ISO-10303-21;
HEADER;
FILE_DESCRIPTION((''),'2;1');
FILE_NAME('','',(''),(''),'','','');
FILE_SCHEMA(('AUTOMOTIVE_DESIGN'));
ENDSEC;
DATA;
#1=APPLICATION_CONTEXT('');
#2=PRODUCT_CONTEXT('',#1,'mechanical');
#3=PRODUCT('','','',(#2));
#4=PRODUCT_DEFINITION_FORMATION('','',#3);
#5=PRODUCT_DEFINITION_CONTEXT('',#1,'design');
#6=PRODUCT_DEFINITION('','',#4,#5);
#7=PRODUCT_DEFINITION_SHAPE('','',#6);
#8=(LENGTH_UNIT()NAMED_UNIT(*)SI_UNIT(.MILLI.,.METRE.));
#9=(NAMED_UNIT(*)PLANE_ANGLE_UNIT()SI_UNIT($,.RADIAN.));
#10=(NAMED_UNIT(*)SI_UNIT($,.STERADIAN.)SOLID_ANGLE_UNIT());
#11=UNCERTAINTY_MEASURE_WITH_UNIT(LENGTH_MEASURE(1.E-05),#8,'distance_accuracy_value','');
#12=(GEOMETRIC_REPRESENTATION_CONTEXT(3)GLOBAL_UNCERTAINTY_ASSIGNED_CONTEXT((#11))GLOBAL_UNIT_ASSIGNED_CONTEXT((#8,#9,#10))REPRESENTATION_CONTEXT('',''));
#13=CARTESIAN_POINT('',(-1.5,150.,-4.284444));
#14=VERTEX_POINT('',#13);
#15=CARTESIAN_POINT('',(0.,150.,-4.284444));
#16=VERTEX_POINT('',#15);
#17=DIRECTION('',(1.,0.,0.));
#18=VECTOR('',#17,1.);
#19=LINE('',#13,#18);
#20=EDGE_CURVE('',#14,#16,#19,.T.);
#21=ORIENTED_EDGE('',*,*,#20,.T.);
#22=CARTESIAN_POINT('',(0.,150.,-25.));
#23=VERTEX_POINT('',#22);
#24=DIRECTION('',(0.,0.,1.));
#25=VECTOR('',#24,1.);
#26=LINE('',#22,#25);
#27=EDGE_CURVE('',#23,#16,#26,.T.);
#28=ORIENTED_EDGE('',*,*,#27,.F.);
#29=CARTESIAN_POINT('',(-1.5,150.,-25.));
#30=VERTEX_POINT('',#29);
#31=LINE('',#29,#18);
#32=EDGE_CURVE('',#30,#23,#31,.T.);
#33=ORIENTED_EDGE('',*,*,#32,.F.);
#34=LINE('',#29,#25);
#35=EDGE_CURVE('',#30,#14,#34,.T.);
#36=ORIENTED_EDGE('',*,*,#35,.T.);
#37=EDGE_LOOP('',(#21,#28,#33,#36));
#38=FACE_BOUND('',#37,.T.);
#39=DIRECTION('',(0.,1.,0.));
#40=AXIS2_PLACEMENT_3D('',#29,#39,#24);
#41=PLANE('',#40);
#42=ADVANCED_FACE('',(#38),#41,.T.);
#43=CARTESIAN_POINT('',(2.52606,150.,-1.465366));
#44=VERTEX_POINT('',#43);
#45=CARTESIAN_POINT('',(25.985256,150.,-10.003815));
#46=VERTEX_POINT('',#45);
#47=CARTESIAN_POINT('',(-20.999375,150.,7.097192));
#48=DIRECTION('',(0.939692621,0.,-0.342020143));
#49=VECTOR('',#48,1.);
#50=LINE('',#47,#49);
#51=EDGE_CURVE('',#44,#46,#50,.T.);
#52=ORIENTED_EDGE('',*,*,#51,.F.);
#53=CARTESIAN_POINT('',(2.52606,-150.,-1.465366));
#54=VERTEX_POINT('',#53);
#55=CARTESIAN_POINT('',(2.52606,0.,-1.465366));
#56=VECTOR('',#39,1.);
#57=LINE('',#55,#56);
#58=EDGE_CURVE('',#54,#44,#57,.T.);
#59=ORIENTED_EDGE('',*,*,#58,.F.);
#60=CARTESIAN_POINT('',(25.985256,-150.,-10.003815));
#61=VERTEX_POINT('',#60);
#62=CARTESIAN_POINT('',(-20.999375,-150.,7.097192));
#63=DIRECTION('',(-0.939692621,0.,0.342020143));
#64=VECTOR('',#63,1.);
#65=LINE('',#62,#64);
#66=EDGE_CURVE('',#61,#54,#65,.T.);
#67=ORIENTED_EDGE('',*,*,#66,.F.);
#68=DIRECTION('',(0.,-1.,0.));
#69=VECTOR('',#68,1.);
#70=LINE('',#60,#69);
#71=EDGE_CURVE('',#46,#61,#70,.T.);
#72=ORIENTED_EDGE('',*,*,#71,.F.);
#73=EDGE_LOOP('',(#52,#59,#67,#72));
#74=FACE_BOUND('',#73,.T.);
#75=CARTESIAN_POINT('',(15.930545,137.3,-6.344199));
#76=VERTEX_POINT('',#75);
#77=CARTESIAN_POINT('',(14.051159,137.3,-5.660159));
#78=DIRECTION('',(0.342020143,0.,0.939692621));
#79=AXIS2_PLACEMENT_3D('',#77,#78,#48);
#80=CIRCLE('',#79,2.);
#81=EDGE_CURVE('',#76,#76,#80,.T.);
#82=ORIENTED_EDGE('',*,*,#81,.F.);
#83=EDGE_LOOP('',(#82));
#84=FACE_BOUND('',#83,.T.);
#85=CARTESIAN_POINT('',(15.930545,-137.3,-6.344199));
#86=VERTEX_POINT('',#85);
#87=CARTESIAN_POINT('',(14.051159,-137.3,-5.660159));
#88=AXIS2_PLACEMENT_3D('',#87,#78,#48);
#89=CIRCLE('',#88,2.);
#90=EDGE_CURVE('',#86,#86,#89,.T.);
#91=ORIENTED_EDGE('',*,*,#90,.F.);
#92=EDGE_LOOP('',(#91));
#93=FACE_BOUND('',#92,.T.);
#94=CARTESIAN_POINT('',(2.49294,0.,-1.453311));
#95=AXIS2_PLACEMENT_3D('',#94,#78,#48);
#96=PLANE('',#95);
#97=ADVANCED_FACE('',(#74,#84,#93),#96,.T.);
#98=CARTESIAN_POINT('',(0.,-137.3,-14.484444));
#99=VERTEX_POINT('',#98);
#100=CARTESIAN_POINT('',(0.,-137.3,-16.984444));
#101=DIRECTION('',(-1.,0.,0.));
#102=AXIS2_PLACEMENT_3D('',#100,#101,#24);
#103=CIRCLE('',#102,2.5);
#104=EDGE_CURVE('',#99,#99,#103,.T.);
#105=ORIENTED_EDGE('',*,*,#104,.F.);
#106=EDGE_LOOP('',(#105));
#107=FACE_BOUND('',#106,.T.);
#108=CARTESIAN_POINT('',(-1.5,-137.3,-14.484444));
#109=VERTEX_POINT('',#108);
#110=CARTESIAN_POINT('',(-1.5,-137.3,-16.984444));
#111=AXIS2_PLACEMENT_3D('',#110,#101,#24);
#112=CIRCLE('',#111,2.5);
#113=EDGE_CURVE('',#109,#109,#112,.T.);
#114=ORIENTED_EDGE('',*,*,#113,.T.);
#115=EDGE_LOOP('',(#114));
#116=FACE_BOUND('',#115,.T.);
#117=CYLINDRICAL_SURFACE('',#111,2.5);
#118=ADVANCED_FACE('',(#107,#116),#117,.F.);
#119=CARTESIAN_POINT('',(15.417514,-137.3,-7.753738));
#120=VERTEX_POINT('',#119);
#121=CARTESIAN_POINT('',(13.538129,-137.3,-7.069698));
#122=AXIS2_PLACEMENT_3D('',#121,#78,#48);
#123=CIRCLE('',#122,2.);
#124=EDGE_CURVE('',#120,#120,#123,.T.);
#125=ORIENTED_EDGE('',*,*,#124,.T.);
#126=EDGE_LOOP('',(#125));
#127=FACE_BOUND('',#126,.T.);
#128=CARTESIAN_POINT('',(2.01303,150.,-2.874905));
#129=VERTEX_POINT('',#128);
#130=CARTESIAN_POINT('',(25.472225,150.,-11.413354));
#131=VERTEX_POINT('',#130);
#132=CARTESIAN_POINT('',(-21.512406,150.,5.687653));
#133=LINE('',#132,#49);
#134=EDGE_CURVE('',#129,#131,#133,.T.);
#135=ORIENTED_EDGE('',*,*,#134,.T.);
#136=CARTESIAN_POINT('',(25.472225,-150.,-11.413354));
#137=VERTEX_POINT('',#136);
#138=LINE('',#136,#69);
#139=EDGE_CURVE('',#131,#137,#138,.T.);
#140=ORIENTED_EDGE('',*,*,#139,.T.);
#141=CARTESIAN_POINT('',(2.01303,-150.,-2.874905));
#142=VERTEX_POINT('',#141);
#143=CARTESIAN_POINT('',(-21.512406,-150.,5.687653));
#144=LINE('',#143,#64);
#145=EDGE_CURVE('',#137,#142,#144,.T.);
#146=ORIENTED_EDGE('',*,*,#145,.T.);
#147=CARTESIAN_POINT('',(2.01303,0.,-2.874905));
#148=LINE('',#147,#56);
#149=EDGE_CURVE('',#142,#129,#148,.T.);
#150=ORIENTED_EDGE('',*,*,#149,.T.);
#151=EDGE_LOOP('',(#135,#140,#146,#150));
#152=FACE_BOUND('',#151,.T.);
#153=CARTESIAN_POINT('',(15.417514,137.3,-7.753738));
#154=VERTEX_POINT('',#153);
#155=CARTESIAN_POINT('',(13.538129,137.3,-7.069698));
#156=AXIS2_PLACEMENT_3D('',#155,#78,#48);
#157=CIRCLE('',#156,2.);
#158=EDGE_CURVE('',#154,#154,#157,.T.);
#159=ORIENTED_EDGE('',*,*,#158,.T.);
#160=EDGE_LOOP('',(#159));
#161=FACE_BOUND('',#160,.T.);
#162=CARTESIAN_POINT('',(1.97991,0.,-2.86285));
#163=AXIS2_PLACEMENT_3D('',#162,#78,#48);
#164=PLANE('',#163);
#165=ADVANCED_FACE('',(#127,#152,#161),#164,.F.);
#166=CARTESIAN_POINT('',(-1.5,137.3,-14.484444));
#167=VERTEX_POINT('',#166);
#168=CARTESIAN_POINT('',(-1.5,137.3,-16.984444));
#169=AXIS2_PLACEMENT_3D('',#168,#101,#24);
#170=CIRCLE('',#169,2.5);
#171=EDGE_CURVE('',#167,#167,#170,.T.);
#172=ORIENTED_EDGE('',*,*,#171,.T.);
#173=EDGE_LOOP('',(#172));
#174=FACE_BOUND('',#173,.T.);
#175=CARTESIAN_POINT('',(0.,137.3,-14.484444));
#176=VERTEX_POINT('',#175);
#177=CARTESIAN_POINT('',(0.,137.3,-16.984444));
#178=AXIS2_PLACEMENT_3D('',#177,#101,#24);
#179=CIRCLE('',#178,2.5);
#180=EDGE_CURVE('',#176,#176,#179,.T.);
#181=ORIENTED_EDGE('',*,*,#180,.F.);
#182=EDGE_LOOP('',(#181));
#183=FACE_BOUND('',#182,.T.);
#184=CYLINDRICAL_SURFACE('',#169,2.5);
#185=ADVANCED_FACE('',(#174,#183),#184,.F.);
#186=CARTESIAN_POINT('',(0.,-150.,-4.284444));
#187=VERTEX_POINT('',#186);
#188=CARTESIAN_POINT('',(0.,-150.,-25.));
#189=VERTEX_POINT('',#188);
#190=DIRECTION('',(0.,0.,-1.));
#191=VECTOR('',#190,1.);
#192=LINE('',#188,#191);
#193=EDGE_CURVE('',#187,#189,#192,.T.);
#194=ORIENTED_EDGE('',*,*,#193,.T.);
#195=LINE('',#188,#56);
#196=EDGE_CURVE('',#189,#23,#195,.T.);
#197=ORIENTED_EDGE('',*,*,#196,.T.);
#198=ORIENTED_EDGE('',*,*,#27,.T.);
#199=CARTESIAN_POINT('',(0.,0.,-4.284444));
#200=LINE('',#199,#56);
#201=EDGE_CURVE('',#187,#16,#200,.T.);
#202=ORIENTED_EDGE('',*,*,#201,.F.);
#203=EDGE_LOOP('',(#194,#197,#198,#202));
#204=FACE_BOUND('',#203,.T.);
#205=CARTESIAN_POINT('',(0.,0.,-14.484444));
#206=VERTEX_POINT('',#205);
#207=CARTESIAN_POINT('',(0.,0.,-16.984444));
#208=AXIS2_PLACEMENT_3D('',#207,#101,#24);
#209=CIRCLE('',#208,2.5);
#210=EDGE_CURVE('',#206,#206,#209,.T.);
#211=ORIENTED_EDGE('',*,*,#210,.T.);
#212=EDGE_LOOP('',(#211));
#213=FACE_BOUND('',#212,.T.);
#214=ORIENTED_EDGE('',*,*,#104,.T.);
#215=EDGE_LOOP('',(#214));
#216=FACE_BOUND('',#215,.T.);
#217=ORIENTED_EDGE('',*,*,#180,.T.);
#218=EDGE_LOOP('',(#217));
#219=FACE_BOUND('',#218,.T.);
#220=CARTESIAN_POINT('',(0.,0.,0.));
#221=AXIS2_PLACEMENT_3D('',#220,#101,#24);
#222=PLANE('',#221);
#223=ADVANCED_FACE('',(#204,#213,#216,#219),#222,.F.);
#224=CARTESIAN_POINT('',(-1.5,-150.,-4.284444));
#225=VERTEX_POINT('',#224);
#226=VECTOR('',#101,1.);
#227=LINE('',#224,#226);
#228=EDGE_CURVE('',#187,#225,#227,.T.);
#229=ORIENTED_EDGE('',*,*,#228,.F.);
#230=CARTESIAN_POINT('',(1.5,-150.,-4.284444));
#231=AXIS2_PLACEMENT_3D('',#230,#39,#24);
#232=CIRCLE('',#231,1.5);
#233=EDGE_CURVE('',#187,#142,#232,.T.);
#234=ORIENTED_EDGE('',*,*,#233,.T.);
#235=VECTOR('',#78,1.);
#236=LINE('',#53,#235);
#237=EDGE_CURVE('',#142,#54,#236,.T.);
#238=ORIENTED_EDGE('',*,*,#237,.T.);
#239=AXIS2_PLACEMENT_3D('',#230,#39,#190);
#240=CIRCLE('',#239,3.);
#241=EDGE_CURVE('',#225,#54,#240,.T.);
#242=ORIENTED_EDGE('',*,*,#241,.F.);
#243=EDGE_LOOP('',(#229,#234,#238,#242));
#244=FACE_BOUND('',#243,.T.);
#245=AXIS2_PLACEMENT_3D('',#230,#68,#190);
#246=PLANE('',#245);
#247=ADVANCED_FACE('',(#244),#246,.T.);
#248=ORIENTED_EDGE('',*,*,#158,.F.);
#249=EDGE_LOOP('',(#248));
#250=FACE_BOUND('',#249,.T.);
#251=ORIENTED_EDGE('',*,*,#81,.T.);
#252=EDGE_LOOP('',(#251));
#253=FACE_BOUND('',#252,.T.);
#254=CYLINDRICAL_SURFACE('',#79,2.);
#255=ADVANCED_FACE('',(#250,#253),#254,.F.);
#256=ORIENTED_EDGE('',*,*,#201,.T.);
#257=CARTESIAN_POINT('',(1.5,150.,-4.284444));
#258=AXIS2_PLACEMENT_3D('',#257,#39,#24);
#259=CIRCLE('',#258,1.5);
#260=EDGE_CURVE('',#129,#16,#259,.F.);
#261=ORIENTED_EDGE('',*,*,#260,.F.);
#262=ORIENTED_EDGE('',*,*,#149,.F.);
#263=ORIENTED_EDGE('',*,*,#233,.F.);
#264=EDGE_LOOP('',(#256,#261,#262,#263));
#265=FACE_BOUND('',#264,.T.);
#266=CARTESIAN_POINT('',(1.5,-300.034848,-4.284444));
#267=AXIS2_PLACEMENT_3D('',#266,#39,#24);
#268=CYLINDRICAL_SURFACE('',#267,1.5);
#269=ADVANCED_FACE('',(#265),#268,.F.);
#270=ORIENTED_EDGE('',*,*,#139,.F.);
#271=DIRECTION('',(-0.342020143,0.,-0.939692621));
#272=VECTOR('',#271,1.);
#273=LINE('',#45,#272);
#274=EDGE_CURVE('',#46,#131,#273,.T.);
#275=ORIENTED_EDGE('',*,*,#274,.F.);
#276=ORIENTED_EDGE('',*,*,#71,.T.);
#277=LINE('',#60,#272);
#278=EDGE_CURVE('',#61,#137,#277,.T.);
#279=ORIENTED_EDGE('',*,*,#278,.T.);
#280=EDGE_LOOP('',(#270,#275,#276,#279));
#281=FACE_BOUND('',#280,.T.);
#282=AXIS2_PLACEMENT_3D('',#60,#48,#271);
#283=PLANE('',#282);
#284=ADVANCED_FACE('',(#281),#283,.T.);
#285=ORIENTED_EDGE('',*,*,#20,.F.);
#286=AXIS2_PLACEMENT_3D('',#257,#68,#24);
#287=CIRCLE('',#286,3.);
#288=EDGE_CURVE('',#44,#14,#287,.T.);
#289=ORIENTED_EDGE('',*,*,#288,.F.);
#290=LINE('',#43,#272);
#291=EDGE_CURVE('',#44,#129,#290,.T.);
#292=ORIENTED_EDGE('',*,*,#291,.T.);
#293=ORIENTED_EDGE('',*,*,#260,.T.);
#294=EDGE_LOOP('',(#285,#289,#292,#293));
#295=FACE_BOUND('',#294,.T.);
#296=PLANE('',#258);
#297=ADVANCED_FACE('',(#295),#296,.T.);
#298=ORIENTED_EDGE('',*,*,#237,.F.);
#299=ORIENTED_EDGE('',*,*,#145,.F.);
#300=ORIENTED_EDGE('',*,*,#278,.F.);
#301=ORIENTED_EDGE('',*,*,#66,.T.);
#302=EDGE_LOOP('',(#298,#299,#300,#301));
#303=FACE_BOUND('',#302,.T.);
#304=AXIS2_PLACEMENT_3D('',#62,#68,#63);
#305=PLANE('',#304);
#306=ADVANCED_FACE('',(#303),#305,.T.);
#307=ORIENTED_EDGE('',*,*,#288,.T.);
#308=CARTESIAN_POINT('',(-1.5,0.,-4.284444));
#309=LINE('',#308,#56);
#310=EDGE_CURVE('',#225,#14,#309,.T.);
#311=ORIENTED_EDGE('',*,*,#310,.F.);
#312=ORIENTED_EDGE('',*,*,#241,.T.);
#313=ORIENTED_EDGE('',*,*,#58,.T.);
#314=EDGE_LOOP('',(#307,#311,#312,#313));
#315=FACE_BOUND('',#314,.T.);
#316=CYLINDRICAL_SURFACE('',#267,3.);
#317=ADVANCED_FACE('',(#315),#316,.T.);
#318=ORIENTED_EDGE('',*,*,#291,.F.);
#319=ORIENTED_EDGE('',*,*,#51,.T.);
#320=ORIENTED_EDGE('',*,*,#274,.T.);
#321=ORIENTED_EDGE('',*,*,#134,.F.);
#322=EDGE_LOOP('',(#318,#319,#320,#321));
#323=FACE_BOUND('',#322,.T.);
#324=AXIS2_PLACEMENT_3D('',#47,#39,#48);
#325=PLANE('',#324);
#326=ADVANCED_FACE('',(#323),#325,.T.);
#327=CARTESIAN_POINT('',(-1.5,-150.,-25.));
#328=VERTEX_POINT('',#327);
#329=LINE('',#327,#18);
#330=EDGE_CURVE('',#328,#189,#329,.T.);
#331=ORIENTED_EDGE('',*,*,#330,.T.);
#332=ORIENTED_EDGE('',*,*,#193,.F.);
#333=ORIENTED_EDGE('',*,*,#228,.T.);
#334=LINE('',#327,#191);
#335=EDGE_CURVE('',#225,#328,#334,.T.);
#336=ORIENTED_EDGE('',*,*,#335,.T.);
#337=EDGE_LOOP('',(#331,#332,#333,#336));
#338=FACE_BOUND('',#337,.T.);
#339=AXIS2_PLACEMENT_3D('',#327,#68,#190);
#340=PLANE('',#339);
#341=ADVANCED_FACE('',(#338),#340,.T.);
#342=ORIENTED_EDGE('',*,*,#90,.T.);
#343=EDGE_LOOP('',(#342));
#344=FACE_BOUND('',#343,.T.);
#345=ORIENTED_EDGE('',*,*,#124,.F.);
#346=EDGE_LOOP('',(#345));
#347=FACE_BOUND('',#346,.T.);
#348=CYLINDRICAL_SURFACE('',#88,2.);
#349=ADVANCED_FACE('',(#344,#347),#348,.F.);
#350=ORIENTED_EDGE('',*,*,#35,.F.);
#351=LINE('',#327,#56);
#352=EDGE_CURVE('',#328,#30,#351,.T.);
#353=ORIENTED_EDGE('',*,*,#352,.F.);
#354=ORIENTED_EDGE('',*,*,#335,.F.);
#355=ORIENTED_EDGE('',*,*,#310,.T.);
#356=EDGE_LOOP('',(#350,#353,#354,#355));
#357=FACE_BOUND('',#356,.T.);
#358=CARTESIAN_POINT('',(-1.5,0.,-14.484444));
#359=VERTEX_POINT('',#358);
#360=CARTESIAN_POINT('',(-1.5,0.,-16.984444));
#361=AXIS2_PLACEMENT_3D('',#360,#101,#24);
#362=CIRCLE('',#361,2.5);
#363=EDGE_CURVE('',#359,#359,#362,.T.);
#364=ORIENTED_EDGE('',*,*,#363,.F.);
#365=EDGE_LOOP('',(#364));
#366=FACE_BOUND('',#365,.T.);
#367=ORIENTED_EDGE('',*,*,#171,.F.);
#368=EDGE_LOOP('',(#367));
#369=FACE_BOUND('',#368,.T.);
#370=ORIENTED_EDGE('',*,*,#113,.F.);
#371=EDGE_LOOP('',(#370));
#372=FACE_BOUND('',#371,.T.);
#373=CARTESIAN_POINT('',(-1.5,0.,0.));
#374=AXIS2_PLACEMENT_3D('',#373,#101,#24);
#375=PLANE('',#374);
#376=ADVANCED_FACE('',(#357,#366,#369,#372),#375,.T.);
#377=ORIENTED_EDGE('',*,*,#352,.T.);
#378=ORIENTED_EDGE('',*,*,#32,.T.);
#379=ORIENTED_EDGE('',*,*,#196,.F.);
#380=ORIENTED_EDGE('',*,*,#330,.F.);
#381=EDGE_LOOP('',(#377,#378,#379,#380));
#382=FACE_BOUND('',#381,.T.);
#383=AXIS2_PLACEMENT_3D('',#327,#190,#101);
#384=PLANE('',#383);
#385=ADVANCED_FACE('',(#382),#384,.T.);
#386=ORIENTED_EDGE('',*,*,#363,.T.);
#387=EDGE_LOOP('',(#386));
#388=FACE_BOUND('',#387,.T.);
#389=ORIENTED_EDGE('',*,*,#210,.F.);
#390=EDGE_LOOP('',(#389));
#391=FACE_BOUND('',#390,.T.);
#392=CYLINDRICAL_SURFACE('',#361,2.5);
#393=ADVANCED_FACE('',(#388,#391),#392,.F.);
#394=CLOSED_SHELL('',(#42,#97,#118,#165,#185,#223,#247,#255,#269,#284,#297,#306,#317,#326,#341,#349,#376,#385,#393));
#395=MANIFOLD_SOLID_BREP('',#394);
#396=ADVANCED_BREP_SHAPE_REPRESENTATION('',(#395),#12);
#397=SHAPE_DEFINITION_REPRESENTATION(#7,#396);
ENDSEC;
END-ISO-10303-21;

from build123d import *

# Parameters (mm, degrees)
SKETCH1_W                = 300
SKETCH1_H                = 50
BASE_FLANGE1_DEPTH       = 1.5
SKETCHED_START           = -150
SKETCHED_BEND1_DEPTH     = 300
SKETCHED_BEND1_2_DEPTH   = 300
F_4_0_4_DIAMETER_HOLE1_D = 4
F_5_0_5_DIAMETER_HOLE1_D = 5


# Read off the part's stored shape, not the designer's step: Sketched Bend1
# Sheet-metal steps are written as plain solids
with BuildPart() as part:
    # Sketch1 → Base-Flange1 (new body)
    with BuildSketch(Plane.YZ):
        Rectangle(SKETCH1_W, SKETCH1_H)
    extrude(amount=-BASE_FLANGE1_DEPTH)

    # Sketched Bend1 outline → Sketched Bend1 (cut)
    with BuildSketch(Plane(origin=(0, 0, 0), x_dir=(1, 0, 0), z_dir=(0, 1, 0)).offset(SKETCHED_START)):
        with BuildLine():
            Line((0, -25), (0, 1.686367809))
            ThreePointArc((0, 1.686367809), (-1.098076211, 2.78444402), (-1.5, 4.28444402))
            Line((-1.5, 4.28444402), (-1.5, -25))
            Line((-1.5, -25), (0, -25))
        make_face()
    extrude(amount=SKETCHED_BEND1_DEPTH, mode=Mode.SUBTRACT)

    # Sketched Bend1 2 outline → Sketched Bend1 2 (add)
    with BuildSketch(Plane(origin=(0, 0, 0), x_dir=(1, 0, 0), z_dir=(0, 1, 0)).offset(SKETCHED_START)):
        with BuildLine():
            Line((25.472225443, 11.413353872), (2.013030215, 2.874905089))
            ThreePointArc((2.013030215, 2.874905089), (0.639635346, 3.055715954), (0, 4.28444402))
            Line((0, 4.28444402), (0, 1.686367809))
            ThreePointArc((0, 1.686367809), (1.238532772, 1.295859926), (2.52606043, 1.465366158))
            Line((2.52606043, 1.465366158), (25.985255658, 10.003814941))
            Line((25.985255658, 10.003814941), (25.472225443, 11.413353872))
        make_face()
    extrude(amount=SKETCHED_BEND1_2_DEPTH)

    # Ø4.0 (4) Diameter Hole1 (through all)
    with Locations(Plane(origin=(-0.175466668, 0, -0.482090707), x_dir=(0, -1, 0), z_dir=(0.3420201433256727, 0, 0.9396926207859071))):
        with Locations((-137.3, 15.139659211), (137.3, 15.139659211)):
            Hole(F_4_0_4_DIAMETER_HOLE1_D / 2)

    # Ø5.0 (5) Diameter Hole1 (through all)
    with Locations(Plane(origin=(-1.5, 0, 0), x_dir=(0, -1, 0), z_dir=(-1, 0, 0))):
        with Locations((-137.3, -16.98444402), (137.3, -16.98444402), (0, -16.98444402)):
            Hole(F_5_0_5_DIAMETER_HOLE1_D / 2)


solid = part.part
